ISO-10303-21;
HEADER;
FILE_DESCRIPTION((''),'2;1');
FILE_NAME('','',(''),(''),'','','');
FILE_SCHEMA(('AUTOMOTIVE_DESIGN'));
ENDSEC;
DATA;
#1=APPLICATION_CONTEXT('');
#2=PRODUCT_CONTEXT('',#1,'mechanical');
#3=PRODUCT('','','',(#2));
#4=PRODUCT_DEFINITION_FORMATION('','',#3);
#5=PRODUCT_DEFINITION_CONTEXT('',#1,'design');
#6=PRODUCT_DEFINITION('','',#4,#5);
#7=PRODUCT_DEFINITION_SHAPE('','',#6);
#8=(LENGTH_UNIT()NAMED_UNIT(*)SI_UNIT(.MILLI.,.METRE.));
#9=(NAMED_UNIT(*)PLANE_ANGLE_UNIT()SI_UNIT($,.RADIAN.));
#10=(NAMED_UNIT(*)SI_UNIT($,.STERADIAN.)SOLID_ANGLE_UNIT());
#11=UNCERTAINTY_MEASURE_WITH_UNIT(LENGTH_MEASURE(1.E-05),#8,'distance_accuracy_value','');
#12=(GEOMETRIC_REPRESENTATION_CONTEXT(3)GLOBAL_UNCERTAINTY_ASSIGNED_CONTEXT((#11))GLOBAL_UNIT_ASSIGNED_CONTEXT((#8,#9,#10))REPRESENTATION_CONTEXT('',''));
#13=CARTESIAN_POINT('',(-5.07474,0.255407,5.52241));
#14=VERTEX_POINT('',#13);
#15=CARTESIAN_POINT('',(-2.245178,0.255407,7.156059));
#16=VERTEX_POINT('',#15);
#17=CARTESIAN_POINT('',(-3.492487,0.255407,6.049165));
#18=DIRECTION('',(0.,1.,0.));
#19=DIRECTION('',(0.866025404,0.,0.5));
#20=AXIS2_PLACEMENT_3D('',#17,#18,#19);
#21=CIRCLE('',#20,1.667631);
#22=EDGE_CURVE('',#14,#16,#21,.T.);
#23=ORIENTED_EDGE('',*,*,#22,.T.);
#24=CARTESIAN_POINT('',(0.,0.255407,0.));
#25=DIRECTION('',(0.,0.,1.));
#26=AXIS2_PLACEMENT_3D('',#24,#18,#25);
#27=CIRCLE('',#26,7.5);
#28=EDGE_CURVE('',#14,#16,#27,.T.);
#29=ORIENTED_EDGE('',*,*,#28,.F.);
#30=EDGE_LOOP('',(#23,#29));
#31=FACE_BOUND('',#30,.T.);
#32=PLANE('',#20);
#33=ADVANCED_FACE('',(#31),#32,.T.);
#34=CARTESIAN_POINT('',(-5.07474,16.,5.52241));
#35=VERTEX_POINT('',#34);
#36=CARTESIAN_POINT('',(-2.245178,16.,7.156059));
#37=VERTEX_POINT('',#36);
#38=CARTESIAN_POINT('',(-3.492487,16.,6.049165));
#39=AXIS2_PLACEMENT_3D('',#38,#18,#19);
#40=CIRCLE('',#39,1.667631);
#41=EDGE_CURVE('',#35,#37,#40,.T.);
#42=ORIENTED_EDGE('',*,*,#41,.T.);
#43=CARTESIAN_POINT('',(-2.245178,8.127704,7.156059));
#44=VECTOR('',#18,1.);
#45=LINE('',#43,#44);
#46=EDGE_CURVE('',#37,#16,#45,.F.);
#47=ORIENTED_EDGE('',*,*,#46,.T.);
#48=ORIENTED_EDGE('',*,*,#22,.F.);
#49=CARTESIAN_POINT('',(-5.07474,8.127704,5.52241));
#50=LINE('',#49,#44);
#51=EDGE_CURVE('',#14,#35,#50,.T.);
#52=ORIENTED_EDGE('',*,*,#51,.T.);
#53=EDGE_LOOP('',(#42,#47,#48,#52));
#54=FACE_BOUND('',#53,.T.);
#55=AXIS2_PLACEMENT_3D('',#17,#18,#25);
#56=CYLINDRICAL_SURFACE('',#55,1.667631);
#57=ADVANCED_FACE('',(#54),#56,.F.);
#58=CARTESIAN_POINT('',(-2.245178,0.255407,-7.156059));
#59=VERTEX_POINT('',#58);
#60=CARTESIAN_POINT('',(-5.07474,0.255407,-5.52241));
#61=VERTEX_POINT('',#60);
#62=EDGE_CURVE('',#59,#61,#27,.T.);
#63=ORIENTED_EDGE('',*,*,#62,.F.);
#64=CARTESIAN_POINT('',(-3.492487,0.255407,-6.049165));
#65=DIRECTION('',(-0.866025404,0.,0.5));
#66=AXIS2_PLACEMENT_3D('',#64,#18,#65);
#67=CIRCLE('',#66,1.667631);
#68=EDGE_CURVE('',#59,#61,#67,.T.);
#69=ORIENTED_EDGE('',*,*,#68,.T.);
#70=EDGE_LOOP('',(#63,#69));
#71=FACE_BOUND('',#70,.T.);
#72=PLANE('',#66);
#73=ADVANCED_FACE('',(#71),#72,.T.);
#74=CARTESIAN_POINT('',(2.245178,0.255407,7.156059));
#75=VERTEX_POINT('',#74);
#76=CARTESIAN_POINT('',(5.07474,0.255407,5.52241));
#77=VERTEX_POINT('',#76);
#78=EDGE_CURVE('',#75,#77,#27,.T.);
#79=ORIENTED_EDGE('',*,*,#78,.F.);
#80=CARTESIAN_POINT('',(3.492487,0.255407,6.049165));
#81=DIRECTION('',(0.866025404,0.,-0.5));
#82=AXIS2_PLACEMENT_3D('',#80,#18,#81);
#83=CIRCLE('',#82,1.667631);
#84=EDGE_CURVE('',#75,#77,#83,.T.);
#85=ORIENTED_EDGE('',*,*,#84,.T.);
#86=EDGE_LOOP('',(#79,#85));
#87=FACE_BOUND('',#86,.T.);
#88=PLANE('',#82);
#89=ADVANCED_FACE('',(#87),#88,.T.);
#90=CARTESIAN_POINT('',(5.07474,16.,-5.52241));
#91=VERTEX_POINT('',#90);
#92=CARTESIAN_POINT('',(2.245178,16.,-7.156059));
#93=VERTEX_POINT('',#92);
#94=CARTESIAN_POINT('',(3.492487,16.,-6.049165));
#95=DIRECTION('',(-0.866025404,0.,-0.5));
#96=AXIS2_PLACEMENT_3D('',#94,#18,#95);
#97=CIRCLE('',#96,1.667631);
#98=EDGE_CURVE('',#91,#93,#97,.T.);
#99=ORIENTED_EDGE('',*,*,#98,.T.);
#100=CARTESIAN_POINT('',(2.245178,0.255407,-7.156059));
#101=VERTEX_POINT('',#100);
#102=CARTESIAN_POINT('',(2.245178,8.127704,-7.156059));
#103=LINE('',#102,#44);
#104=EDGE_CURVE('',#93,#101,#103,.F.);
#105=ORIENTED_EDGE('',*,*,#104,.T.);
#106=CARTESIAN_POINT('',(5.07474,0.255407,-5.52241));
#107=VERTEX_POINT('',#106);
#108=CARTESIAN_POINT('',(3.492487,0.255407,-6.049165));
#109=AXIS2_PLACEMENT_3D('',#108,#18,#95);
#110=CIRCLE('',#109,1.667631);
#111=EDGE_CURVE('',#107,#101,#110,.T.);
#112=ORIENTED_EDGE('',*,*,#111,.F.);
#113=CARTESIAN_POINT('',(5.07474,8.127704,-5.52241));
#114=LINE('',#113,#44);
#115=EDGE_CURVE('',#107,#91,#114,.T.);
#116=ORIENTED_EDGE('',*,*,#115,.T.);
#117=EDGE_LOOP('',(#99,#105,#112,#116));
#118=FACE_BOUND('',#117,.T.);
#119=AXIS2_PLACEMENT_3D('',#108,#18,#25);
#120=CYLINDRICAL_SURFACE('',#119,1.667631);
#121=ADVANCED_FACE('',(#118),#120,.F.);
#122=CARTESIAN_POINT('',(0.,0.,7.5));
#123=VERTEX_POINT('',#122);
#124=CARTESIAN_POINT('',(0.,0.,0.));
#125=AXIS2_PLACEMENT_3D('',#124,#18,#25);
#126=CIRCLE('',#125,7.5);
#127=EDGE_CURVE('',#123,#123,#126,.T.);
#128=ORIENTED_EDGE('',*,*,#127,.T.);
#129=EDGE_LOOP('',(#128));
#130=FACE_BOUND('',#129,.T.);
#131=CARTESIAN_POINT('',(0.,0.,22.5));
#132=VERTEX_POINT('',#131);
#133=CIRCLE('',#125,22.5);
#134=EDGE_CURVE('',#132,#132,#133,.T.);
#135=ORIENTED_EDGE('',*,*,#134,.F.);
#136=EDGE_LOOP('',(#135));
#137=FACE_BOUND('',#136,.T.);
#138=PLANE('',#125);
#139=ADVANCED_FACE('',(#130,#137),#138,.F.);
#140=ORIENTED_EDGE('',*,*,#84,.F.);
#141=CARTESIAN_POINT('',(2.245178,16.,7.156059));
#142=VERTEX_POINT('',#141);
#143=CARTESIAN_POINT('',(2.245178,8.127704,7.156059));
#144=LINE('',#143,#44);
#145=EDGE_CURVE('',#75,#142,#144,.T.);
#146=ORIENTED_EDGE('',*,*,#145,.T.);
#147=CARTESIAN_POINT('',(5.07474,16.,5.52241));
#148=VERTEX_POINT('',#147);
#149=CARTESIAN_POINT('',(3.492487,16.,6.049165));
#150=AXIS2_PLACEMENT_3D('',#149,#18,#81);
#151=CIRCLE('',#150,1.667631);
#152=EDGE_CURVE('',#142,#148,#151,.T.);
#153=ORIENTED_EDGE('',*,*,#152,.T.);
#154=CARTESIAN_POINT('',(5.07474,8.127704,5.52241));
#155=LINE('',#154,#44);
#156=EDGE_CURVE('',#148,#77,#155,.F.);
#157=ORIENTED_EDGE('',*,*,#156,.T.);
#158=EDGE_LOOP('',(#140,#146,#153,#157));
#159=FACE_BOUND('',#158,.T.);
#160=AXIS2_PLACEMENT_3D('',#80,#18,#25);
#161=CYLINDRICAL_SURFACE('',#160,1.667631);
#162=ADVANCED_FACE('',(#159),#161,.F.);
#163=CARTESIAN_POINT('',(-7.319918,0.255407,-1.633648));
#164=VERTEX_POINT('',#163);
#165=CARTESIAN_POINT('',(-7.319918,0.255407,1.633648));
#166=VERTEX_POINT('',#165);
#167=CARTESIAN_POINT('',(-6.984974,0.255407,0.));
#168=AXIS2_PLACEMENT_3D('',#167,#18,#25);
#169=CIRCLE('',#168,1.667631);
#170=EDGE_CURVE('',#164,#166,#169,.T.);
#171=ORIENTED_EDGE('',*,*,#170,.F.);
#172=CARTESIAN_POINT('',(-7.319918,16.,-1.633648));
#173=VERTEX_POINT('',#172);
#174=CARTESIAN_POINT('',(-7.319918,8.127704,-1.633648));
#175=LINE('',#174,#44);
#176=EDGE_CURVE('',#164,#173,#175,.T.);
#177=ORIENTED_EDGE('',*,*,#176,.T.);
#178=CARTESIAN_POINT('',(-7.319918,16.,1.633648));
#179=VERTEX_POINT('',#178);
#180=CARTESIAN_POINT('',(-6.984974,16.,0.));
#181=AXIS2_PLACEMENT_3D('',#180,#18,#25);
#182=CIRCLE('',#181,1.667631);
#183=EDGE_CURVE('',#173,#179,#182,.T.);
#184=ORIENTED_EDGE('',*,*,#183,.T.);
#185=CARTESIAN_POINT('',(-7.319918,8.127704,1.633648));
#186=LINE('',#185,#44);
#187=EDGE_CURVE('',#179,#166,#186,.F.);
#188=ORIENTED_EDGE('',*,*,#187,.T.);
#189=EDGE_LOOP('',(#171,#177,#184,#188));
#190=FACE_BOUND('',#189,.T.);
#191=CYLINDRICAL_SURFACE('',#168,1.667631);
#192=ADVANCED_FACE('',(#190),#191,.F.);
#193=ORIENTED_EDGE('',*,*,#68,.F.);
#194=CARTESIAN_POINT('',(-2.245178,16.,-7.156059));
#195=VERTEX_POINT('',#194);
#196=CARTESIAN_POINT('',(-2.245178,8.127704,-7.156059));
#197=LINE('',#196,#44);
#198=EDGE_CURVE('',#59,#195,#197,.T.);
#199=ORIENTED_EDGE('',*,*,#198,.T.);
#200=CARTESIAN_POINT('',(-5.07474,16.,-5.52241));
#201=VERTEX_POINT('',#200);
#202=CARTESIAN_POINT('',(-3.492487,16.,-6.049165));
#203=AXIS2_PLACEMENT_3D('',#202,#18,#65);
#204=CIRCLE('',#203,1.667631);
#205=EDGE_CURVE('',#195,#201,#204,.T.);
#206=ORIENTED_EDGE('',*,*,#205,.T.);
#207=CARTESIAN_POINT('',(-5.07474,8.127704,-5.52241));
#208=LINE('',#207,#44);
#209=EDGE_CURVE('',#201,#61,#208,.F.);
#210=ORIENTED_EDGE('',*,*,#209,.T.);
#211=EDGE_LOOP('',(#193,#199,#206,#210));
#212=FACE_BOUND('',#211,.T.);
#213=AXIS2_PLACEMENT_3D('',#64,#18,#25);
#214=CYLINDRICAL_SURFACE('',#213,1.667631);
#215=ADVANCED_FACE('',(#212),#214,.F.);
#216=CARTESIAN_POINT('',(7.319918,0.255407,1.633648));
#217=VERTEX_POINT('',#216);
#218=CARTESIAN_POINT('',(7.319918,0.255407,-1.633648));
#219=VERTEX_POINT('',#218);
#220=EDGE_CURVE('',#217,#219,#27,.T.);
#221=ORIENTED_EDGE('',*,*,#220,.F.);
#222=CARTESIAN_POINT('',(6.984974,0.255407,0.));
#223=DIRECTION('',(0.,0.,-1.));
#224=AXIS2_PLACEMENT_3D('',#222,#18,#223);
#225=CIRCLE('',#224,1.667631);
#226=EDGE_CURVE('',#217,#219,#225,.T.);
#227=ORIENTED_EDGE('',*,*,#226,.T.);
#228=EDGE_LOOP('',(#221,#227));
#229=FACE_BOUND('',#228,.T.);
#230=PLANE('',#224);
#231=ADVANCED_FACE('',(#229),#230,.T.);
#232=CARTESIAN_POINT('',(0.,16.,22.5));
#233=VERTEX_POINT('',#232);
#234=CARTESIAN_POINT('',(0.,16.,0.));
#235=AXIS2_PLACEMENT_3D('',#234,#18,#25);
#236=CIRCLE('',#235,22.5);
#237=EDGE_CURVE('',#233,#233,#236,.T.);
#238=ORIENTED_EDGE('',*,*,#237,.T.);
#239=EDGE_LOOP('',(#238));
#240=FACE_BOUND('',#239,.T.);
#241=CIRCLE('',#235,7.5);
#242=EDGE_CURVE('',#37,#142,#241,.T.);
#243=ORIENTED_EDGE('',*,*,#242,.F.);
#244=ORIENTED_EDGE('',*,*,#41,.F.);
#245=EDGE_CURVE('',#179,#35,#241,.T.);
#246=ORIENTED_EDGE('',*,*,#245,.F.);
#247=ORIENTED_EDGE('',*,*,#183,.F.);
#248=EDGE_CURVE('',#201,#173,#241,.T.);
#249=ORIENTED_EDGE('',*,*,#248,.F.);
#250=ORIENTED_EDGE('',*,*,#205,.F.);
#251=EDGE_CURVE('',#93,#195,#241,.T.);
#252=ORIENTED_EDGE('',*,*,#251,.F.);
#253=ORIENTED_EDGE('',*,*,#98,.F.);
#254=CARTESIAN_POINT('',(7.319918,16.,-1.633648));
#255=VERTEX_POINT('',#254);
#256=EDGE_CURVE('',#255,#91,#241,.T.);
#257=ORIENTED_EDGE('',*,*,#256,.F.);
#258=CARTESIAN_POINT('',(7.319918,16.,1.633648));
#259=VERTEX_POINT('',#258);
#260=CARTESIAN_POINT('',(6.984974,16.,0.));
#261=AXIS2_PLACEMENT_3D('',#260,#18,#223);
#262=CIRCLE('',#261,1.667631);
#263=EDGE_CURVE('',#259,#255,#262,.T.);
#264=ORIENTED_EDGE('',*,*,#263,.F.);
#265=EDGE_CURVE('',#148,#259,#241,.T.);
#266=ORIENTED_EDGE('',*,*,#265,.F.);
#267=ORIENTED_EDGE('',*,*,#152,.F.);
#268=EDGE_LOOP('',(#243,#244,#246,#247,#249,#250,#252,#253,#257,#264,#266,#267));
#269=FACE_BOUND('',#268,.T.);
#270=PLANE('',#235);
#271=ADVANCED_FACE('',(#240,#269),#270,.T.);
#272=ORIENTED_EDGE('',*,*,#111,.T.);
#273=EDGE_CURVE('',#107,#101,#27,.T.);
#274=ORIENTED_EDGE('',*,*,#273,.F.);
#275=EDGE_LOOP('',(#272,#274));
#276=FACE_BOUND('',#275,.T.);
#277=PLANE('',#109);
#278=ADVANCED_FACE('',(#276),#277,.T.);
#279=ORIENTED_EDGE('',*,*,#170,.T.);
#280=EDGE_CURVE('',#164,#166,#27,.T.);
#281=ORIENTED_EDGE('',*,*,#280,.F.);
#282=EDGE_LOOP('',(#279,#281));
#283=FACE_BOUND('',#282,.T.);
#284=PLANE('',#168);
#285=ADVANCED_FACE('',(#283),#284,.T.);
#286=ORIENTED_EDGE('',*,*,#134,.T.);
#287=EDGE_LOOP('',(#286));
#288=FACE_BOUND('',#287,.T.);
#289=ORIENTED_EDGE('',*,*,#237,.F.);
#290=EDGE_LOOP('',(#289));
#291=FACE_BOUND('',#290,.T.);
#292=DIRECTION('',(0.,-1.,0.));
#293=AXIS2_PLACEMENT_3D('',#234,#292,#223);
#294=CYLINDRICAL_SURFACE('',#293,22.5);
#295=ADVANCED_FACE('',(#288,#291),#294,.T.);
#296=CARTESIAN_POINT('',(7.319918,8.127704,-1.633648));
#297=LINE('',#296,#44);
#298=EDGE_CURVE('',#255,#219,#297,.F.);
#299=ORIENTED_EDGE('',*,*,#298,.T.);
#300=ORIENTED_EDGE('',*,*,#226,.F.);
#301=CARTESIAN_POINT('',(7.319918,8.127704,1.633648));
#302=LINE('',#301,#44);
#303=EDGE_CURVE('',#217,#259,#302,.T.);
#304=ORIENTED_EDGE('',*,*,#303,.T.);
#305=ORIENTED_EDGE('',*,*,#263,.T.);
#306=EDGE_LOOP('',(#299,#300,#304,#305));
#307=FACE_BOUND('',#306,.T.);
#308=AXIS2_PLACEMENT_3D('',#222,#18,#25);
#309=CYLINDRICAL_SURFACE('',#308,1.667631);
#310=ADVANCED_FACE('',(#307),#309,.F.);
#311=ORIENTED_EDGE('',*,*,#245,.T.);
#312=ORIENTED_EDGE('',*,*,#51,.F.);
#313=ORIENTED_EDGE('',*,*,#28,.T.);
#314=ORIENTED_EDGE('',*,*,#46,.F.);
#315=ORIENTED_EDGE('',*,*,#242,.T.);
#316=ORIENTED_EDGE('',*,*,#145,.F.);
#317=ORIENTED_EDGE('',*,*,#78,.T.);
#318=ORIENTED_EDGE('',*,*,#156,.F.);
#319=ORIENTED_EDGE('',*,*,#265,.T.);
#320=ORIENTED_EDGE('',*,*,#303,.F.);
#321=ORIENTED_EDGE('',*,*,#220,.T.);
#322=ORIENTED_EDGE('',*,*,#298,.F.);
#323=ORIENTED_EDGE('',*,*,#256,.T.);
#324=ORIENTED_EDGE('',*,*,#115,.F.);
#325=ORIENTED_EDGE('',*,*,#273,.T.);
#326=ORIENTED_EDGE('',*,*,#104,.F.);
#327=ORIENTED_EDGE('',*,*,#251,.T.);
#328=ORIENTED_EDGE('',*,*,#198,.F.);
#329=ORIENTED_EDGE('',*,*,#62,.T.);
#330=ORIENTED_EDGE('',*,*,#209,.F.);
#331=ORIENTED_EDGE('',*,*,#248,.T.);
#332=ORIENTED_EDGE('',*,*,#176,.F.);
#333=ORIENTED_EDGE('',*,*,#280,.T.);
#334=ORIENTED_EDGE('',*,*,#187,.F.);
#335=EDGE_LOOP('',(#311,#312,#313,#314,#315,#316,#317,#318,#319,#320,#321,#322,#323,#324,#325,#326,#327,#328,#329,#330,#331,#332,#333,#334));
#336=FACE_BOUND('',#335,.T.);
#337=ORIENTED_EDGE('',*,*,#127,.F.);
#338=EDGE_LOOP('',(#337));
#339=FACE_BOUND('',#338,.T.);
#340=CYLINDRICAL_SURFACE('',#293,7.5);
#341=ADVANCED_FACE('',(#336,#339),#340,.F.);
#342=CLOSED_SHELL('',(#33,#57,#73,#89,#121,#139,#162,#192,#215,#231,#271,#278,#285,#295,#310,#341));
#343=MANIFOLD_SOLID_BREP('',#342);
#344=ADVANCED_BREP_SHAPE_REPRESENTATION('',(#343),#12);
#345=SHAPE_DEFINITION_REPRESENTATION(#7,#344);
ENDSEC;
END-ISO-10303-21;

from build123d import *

# Parameters (mm, degrees)
SKETCH1_R           = 22.5
BOSS_EXTRUDE1_DEPTH = 16
SKETCH2_R           = 7.5
CUT_EXTRUDE1_DEPTH  = 36.616007637
SKETCH3_R           = 1.667631155
CUT_EXTRUDE2_DEPTH  = 15.744592973
CIRPATTERN1_COUNT   = 6


with BuildPart() as part:
    # Sketch1 → Boss-Extrude1 (new body)
    with BuildSketch(Plane(origin=(0, 0, 0), x_dir=(1, 0, 0), z_dir=(0, 1, 0))):
        Circle(SKETCH1_R)
    extrude(amount=BOSS_EXTRUDE1_DEPTH)

    # Sketch2 → Cut-Extrude1 (cut, through all)
    with BuildSketch(Plane(origin=(0, 0, 0), x_dir=(1, 0, 0), z_dir=(0, 1, 0))):
        Circle(SKETCH2_R)
    extrude(amount=CUT_EXTRUDE1_DEPTH, mode=Mode.SUBTRACT)

    # Sketch3 → Cut-Extrude2 (cut)
    with BuildSketch(Plane(origin=(0, 16, 0), x_dir=(1, 0, 0), z_dir=(0, 1, 0))):
        with Locations((-6.984974331, 0)):
            Circle(SKETCH3_R)
    cut_extrude2 = extrude(amount=-CUT_EXTRUDE2_DEPTH, mode=Mode.SUBTRACT)

    # CirPattern1: Cut-Extrude2 ×6 about axis
    cirpattern1_axis = Axis((0, 0, 0), (0, 1, 0))
    for i in range(1, CIRPATTERN1_COUNT):
        add(cut_extrude2.rotate(cirpattern1_axis, i * 360 / CIRPATTERN1_COUNT), mode=Mode.SUBTRACT)


solid = part.part
